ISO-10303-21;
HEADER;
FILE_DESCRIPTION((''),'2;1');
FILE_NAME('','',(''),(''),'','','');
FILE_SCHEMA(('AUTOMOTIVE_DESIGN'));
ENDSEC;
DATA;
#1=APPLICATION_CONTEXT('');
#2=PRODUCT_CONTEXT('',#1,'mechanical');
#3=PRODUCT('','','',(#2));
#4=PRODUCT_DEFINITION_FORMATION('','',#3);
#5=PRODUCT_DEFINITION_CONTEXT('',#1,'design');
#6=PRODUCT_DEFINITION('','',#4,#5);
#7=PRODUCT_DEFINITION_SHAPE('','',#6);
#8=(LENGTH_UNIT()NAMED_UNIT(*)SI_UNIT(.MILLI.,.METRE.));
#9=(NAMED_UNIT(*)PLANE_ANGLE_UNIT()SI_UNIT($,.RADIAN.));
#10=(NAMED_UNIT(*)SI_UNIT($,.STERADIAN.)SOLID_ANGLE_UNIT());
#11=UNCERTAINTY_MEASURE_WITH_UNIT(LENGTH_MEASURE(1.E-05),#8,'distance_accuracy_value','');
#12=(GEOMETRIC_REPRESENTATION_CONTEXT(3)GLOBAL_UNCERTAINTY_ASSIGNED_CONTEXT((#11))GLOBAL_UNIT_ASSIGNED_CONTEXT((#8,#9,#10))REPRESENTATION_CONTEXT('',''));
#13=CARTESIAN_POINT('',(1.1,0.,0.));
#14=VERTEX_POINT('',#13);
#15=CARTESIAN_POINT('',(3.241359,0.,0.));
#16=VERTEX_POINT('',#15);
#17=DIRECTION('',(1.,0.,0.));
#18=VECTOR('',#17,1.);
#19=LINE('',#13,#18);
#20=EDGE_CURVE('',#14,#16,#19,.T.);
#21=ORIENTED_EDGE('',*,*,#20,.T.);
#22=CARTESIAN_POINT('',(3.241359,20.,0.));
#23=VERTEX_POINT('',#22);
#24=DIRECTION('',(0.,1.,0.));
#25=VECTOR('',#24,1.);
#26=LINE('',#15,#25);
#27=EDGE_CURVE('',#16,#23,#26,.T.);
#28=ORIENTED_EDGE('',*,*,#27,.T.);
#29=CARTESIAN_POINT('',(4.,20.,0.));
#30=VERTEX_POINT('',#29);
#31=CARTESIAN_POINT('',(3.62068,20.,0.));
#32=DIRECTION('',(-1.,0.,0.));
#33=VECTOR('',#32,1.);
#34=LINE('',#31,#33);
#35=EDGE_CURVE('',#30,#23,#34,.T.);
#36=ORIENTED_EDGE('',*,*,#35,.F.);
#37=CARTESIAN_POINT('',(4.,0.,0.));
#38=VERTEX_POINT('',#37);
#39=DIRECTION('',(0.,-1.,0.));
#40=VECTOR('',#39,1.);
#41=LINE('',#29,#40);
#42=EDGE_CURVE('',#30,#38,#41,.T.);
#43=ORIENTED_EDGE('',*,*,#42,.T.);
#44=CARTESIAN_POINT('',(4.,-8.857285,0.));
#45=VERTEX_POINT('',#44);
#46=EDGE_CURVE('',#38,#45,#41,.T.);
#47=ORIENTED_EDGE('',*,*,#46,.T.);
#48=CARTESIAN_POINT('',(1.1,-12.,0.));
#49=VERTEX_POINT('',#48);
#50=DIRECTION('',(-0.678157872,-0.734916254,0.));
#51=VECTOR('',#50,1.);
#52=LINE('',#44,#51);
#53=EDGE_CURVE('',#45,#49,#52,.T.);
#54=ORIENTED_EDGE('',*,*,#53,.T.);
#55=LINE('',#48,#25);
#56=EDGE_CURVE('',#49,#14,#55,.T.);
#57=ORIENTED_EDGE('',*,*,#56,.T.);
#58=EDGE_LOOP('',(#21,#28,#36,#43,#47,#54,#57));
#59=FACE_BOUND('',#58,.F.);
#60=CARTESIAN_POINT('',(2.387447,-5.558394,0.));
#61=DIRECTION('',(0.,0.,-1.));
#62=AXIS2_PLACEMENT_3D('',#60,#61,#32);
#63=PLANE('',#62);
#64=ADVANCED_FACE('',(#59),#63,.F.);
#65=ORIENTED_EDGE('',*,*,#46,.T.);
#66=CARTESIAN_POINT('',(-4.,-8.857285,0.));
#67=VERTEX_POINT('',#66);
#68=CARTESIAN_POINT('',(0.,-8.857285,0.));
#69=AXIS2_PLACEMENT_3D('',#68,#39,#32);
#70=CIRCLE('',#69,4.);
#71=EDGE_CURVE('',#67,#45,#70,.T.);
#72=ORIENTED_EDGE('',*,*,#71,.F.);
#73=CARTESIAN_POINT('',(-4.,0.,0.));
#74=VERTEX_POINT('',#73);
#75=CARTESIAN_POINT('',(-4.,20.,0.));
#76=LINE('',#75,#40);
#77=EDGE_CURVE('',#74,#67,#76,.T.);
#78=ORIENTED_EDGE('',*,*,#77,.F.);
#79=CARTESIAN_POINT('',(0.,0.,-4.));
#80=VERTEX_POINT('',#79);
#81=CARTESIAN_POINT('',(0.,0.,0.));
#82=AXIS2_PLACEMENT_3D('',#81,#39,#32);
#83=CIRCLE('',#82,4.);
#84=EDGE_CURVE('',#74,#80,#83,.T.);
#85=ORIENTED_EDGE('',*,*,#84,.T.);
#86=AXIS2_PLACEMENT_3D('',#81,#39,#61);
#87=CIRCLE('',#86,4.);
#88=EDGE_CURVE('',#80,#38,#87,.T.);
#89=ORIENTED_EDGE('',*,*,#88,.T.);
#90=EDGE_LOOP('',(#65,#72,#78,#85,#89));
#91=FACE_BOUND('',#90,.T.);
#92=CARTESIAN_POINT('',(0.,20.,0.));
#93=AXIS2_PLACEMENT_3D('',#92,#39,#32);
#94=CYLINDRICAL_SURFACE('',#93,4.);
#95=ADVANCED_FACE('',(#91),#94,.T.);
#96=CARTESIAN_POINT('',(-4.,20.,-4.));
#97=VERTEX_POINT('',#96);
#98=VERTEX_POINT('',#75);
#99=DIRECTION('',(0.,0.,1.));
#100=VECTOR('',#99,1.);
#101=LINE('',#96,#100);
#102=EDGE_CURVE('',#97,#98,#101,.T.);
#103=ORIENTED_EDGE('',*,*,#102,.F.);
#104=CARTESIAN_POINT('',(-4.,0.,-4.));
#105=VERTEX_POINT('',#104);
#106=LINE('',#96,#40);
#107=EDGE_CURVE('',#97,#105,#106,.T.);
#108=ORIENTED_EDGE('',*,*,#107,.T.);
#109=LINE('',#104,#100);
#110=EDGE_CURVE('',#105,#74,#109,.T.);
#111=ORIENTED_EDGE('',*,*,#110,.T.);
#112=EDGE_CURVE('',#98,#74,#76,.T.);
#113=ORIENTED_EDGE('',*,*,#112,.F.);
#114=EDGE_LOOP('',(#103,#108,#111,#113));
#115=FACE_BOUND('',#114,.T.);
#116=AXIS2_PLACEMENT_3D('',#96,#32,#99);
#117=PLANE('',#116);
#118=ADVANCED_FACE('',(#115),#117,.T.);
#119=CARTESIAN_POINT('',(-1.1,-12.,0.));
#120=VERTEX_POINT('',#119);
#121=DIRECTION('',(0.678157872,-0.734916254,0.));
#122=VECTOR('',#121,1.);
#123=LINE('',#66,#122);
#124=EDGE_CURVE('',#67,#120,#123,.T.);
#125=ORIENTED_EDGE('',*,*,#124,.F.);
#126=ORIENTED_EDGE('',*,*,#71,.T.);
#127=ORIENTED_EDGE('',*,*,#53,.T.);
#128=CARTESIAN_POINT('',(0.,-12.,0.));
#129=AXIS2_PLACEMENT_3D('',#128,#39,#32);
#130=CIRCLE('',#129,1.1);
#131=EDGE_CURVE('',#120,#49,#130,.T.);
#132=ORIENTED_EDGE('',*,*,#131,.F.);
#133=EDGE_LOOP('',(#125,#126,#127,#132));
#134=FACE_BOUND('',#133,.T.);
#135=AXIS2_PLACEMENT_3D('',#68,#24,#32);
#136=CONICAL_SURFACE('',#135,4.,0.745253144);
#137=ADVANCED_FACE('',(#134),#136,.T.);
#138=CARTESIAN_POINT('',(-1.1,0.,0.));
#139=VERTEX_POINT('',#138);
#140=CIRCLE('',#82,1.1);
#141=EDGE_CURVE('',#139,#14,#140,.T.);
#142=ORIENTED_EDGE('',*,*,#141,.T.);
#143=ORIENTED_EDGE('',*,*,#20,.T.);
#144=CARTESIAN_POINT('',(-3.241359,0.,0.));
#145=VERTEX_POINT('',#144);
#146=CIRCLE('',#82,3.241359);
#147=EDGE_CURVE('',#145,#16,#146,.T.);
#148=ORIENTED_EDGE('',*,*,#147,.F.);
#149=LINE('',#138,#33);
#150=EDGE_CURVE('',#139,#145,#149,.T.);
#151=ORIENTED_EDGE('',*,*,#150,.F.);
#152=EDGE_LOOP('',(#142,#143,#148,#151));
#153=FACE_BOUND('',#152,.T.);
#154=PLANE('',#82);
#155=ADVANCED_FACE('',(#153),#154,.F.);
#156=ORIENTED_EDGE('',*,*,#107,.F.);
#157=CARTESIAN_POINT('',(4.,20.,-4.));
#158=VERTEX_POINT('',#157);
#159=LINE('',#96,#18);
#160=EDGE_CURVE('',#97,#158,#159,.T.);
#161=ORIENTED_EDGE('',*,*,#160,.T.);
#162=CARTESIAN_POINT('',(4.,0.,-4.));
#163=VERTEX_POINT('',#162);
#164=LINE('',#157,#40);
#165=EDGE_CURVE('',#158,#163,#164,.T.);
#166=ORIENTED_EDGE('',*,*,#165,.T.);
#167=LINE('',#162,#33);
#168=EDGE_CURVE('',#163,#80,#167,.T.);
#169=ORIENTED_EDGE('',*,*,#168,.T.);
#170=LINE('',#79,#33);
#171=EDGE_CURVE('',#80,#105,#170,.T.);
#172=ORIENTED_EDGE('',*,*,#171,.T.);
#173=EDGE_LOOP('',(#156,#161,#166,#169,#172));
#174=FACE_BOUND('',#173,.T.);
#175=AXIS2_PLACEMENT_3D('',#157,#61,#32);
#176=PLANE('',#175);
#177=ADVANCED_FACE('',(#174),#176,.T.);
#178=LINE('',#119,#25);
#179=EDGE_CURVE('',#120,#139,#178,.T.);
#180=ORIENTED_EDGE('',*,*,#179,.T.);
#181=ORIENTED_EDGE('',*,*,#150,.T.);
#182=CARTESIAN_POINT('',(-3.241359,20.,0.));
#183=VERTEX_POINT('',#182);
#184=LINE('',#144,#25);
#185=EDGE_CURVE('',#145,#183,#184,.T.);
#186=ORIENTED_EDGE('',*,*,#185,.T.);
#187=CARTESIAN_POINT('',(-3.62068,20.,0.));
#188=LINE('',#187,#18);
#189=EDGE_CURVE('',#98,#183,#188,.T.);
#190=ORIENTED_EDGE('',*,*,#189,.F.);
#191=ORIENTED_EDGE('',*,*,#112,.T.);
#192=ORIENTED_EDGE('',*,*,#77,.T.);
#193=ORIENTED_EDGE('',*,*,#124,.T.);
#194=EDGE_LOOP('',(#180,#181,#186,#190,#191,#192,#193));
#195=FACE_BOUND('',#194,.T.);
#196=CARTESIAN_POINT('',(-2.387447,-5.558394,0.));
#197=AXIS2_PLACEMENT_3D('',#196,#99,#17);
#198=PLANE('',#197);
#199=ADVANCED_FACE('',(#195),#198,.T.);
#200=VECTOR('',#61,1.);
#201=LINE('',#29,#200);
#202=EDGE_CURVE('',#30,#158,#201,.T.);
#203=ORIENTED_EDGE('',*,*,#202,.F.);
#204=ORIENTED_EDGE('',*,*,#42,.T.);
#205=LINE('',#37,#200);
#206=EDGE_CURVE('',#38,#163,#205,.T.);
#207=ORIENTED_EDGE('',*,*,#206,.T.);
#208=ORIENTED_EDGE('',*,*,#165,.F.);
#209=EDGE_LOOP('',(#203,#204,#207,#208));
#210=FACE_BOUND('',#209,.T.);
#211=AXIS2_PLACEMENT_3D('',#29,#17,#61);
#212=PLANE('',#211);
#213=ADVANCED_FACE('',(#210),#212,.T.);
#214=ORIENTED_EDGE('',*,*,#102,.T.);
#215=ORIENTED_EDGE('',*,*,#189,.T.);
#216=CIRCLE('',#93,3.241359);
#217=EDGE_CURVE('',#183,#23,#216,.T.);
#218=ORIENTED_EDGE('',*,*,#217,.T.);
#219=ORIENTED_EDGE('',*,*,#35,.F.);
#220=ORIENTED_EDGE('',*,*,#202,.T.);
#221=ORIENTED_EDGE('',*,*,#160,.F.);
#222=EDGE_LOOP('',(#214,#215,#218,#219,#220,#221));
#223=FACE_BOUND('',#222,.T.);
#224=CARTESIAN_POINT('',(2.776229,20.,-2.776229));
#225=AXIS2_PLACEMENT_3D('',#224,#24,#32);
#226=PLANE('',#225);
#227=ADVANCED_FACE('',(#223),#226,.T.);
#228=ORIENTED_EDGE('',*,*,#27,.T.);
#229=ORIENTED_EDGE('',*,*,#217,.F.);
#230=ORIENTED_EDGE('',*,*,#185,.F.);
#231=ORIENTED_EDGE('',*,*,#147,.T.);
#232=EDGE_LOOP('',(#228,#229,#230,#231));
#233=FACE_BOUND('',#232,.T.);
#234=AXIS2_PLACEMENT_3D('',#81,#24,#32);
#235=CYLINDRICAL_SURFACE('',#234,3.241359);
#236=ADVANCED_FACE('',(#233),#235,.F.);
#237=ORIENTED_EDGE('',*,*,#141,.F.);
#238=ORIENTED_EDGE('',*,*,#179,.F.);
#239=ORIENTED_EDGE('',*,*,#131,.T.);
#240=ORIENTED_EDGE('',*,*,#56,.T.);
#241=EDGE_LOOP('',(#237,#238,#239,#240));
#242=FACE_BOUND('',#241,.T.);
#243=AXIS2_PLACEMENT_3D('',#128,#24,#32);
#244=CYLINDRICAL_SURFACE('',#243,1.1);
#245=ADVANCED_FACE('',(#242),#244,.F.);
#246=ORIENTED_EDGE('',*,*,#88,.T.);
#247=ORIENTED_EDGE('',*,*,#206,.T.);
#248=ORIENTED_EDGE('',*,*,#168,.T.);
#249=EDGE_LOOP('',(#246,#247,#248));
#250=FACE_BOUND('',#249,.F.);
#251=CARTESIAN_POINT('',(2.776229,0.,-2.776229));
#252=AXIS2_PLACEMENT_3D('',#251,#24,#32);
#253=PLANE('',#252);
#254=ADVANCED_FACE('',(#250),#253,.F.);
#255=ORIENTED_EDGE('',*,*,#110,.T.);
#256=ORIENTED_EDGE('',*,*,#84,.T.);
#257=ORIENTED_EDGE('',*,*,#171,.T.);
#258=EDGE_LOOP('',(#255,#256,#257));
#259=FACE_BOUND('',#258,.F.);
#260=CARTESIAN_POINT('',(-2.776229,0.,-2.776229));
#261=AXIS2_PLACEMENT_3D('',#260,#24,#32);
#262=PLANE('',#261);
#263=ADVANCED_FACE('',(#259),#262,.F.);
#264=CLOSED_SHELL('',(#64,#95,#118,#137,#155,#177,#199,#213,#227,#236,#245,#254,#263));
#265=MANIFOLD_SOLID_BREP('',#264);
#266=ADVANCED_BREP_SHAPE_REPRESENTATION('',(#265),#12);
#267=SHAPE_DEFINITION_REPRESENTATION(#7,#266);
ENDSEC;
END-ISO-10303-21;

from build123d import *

# Parameters (mm, degrees)
F0_W     = 0.7586409766
F0_H     = 4.9999998882
F0_H_2   = 9
F0_H_3   = 6.0000001118
F1_ANGLE = 180
F3_DEPTH = 20


with BuildPart() as f1:
    # F0 (on Top) → F1 (revolve)
    with BuildSketch(Plane.XY):
        Polygon((-4, -8.8572846726), (-1.1, -12), (-1.1, 0), (-1.55, 0), (-3.2413590234, 0), (-4, 0), align=None)
        with Locations((-3.6206795117, 2.4999999441)):
            Rectangle(F0_W, F0_H)
        with Locations((-3.6206795117, 9.4999998882)):
            Rectangle(F0_W, F0_H_2)
        with Locations((-3.6206795117, 16.9999999441)):
            Rectangle(F0_W, F0_H_3)
    revolve(axis=Axis((0, 4.4247480631, 0), (0, -1, 0)), revolution_arc=F1_ANGLE)

    # F2 (on face) → F3 (join)
    with BuildSketch(Plane(origin=(0, 20, 0), x_dir=(-1, 0, 0), z_dir=(0, 1, 0))):
        with BuildLine():
            ThreePointArc((0, -4), (-2.8284271247, -2.8284271247), (-4, 0))
            Line((-4, 0), (-4, -4))
            Line((-4, -4), (0, -4))
        make_face()
        with BuildLine():
            ThreePointArc((4, 0), (2.8284271247, -2.8284271247), (0, -4))
            Line((0, -4), (4, -4))
            Line((4, -4), (4, 0))
        make_face()
    extrude(amount=-F3_DEPTH)


solid = f1.part
